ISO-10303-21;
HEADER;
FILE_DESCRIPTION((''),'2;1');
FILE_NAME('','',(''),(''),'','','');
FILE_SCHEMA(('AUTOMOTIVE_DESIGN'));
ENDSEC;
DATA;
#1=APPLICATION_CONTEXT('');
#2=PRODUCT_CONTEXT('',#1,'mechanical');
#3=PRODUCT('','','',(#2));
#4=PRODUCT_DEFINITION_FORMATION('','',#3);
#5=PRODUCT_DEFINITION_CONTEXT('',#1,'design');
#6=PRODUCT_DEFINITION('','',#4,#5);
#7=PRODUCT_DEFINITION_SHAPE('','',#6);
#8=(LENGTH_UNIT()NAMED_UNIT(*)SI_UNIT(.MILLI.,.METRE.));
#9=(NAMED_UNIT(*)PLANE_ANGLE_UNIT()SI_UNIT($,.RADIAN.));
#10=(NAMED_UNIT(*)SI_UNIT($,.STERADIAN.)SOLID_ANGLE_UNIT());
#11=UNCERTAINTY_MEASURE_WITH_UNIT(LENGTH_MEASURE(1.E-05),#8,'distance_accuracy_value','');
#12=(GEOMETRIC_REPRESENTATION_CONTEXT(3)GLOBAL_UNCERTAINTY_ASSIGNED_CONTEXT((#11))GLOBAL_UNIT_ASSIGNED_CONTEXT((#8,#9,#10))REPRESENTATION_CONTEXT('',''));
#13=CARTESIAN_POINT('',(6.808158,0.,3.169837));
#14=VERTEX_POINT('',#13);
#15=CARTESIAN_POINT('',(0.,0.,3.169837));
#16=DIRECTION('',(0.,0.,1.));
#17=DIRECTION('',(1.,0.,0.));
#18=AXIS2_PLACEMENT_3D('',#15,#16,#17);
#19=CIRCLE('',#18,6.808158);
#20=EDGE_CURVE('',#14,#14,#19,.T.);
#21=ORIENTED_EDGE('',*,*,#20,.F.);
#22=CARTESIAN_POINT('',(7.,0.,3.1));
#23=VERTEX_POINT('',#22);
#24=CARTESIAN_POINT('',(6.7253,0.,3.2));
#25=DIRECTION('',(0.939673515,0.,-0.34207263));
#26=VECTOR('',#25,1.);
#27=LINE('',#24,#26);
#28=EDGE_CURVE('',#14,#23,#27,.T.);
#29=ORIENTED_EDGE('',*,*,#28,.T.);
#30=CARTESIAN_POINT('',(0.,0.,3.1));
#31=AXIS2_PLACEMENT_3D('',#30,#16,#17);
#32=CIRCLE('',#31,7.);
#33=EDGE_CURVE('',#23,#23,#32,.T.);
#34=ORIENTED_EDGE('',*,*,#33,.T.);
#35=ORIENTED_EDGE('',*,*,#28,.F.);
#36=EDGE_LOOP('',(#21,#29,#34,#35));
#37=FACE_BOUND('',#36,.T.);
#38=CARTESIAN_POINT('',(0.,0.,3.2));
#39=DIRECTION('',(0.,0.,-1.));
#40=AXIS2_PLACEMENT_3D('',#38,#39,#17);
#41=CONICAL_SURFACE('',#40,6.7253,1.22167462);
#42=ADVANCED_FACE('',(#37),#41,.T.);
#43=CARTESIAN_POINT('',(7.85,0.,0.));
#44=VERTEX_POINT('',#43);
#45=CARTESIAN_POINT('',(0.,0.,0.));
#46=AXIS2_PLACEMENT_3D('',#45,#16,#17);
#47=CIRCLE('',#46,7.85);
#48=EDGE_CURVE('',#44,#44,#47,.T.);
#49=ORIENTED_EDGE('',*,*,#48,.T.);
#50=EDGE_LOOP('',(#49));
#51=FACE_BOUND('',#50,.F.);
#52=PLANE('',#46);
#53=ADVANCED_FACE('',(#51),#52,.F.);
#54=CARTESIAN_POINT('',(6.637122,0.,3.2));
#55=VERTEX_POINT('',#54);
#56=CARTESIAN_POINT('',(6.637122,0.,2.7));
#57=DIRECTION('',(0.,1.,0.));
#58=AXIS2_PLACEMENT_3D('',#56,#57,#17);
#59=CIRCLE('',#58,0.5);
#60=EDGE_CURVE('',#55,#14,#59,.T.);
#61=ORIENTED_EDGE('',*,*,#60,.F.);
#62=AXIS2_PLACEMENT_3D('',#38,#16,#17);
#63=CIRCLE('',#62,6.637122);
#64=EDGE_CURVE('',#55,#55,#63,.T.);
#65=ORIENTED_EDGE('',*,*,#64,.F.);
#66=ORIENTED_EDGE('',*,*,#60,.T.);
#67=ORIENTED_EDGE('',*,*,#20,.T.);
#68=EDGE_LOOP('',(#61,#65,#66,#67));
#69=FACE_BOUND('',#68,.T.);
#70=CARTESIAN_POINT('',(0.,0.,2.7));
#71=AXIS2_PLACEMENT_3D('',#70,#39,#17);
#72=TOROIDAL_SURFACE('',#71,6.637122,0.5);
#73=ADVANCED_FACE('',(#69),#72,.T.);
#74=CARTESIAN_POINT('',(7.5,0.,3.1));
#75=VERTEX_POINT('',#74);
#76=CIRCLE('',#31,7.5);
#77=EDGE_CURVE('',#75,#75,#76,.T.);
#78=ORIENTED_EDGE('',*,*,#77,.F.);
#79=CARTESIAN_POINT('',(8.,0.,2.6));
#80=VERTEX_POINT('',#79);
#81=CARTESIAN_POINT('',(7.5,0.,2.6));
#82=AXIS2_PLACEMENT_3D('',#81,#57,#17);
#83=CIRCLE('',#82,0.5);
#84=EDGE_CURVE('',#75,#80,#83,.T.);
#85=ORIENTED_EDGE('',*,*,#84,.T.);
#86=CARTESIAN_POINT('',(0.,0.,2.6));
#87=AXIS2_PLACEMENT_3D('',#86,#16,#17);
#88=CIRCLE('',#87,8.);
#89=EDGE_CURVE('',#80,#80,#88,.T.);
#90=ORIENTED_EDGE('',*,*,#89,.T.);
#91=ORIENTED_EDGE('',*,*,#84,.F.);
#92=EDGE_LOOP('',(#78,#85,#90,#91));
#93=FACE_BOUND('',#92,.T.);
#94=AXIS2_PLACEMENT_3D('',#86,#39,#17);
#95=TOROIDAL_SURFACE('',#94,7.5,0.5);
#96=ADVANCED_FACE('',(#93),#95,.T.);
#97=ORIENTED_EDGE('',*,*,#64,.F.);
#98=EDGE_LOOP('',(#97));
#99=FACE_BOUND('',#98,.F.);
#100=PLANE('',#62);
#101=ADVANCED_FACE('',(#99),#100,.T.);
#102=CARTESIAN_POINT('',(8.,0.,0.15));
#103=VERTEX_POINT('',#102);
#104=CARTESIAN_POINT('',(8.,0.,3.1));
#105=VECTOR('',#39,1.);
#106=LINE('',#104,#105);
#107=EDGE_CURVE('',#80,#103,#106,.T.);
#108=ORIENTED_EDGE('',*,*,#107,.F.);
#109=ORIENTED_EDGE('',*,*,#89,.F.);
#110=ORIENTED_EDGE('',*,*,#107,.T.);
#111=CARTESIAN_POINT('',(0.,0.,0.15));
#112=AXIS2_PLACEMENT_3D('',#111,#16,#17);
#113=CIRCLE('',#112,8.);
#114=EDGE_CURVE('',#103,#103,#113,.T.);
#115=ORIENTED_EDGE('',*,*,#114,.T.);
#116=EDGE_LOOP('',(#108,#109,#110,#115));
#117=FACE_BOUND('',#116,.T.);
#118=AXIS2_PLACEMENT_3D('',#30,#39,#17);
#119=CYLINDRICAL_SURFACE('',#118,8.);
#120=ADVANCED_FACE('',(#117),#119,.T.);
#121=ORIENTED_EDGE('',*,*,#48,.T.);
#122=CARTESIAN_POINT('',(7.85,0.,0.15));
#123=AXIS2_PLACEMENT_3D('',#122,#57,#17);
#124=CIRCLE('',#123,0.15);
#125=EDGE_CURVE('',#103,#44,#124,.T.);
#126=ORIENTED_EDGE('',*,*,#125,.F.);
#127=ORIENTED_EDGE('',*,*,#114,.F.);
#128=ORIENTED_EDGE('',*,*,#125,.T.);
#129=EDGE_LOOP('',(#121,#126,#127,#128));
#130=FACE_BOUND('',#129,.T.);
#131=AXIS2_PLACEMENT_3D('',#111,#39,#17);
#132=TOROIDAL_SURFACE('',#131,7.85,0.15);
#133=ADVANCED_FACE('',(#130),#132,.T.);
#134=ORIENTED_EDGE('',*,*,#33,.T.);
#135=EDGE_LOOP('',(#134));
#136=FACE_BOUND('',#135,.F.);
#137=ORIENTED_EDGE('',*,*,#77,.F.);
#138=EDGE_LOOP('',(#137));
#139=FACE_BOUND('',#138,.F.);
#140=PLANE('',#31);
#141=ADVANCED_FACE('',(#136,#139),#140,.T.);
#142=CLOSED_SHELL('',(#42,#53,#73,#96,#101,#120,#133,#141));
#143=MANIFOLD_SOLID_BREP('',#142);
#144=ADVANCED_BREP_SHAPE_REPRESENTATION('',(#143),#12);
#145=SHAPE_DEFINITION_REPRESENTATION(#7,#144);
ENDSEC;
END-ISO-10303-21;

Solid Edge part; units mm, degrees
sketch "Sketch1" plane through (0, 0, 0) normal (0, -1, 0) x (1, 0, 0)
  line L0 (0, 3.2) -> (6.7253, 3.2)
  line L1 (6.7253, 3.2) -> (7, 3.1)
  line L2 (7, 3.1) -> (8, 3.1)
  line L3 (8, 3.1) -> (8, 0)
  line L4 (8, 0) -> (0, 0)
  dimension "D1" = 8
  dimension "D2" = 7
  dimension "D3" = 0.1
  dimension "D4" = 3.2
revolve "RevolvedProtrusion1" add sketch "Sketch1" angle 360 about axis through (0, 0, 0) along (0, 0, 1)
fillet "Round1" radius 0.5 2 edges at (-8, 0, 3.1) (-6.7253, 0, 3.2)
fillet "Round_2" radius 0.15 1 edges at (-8, 0, 0)
